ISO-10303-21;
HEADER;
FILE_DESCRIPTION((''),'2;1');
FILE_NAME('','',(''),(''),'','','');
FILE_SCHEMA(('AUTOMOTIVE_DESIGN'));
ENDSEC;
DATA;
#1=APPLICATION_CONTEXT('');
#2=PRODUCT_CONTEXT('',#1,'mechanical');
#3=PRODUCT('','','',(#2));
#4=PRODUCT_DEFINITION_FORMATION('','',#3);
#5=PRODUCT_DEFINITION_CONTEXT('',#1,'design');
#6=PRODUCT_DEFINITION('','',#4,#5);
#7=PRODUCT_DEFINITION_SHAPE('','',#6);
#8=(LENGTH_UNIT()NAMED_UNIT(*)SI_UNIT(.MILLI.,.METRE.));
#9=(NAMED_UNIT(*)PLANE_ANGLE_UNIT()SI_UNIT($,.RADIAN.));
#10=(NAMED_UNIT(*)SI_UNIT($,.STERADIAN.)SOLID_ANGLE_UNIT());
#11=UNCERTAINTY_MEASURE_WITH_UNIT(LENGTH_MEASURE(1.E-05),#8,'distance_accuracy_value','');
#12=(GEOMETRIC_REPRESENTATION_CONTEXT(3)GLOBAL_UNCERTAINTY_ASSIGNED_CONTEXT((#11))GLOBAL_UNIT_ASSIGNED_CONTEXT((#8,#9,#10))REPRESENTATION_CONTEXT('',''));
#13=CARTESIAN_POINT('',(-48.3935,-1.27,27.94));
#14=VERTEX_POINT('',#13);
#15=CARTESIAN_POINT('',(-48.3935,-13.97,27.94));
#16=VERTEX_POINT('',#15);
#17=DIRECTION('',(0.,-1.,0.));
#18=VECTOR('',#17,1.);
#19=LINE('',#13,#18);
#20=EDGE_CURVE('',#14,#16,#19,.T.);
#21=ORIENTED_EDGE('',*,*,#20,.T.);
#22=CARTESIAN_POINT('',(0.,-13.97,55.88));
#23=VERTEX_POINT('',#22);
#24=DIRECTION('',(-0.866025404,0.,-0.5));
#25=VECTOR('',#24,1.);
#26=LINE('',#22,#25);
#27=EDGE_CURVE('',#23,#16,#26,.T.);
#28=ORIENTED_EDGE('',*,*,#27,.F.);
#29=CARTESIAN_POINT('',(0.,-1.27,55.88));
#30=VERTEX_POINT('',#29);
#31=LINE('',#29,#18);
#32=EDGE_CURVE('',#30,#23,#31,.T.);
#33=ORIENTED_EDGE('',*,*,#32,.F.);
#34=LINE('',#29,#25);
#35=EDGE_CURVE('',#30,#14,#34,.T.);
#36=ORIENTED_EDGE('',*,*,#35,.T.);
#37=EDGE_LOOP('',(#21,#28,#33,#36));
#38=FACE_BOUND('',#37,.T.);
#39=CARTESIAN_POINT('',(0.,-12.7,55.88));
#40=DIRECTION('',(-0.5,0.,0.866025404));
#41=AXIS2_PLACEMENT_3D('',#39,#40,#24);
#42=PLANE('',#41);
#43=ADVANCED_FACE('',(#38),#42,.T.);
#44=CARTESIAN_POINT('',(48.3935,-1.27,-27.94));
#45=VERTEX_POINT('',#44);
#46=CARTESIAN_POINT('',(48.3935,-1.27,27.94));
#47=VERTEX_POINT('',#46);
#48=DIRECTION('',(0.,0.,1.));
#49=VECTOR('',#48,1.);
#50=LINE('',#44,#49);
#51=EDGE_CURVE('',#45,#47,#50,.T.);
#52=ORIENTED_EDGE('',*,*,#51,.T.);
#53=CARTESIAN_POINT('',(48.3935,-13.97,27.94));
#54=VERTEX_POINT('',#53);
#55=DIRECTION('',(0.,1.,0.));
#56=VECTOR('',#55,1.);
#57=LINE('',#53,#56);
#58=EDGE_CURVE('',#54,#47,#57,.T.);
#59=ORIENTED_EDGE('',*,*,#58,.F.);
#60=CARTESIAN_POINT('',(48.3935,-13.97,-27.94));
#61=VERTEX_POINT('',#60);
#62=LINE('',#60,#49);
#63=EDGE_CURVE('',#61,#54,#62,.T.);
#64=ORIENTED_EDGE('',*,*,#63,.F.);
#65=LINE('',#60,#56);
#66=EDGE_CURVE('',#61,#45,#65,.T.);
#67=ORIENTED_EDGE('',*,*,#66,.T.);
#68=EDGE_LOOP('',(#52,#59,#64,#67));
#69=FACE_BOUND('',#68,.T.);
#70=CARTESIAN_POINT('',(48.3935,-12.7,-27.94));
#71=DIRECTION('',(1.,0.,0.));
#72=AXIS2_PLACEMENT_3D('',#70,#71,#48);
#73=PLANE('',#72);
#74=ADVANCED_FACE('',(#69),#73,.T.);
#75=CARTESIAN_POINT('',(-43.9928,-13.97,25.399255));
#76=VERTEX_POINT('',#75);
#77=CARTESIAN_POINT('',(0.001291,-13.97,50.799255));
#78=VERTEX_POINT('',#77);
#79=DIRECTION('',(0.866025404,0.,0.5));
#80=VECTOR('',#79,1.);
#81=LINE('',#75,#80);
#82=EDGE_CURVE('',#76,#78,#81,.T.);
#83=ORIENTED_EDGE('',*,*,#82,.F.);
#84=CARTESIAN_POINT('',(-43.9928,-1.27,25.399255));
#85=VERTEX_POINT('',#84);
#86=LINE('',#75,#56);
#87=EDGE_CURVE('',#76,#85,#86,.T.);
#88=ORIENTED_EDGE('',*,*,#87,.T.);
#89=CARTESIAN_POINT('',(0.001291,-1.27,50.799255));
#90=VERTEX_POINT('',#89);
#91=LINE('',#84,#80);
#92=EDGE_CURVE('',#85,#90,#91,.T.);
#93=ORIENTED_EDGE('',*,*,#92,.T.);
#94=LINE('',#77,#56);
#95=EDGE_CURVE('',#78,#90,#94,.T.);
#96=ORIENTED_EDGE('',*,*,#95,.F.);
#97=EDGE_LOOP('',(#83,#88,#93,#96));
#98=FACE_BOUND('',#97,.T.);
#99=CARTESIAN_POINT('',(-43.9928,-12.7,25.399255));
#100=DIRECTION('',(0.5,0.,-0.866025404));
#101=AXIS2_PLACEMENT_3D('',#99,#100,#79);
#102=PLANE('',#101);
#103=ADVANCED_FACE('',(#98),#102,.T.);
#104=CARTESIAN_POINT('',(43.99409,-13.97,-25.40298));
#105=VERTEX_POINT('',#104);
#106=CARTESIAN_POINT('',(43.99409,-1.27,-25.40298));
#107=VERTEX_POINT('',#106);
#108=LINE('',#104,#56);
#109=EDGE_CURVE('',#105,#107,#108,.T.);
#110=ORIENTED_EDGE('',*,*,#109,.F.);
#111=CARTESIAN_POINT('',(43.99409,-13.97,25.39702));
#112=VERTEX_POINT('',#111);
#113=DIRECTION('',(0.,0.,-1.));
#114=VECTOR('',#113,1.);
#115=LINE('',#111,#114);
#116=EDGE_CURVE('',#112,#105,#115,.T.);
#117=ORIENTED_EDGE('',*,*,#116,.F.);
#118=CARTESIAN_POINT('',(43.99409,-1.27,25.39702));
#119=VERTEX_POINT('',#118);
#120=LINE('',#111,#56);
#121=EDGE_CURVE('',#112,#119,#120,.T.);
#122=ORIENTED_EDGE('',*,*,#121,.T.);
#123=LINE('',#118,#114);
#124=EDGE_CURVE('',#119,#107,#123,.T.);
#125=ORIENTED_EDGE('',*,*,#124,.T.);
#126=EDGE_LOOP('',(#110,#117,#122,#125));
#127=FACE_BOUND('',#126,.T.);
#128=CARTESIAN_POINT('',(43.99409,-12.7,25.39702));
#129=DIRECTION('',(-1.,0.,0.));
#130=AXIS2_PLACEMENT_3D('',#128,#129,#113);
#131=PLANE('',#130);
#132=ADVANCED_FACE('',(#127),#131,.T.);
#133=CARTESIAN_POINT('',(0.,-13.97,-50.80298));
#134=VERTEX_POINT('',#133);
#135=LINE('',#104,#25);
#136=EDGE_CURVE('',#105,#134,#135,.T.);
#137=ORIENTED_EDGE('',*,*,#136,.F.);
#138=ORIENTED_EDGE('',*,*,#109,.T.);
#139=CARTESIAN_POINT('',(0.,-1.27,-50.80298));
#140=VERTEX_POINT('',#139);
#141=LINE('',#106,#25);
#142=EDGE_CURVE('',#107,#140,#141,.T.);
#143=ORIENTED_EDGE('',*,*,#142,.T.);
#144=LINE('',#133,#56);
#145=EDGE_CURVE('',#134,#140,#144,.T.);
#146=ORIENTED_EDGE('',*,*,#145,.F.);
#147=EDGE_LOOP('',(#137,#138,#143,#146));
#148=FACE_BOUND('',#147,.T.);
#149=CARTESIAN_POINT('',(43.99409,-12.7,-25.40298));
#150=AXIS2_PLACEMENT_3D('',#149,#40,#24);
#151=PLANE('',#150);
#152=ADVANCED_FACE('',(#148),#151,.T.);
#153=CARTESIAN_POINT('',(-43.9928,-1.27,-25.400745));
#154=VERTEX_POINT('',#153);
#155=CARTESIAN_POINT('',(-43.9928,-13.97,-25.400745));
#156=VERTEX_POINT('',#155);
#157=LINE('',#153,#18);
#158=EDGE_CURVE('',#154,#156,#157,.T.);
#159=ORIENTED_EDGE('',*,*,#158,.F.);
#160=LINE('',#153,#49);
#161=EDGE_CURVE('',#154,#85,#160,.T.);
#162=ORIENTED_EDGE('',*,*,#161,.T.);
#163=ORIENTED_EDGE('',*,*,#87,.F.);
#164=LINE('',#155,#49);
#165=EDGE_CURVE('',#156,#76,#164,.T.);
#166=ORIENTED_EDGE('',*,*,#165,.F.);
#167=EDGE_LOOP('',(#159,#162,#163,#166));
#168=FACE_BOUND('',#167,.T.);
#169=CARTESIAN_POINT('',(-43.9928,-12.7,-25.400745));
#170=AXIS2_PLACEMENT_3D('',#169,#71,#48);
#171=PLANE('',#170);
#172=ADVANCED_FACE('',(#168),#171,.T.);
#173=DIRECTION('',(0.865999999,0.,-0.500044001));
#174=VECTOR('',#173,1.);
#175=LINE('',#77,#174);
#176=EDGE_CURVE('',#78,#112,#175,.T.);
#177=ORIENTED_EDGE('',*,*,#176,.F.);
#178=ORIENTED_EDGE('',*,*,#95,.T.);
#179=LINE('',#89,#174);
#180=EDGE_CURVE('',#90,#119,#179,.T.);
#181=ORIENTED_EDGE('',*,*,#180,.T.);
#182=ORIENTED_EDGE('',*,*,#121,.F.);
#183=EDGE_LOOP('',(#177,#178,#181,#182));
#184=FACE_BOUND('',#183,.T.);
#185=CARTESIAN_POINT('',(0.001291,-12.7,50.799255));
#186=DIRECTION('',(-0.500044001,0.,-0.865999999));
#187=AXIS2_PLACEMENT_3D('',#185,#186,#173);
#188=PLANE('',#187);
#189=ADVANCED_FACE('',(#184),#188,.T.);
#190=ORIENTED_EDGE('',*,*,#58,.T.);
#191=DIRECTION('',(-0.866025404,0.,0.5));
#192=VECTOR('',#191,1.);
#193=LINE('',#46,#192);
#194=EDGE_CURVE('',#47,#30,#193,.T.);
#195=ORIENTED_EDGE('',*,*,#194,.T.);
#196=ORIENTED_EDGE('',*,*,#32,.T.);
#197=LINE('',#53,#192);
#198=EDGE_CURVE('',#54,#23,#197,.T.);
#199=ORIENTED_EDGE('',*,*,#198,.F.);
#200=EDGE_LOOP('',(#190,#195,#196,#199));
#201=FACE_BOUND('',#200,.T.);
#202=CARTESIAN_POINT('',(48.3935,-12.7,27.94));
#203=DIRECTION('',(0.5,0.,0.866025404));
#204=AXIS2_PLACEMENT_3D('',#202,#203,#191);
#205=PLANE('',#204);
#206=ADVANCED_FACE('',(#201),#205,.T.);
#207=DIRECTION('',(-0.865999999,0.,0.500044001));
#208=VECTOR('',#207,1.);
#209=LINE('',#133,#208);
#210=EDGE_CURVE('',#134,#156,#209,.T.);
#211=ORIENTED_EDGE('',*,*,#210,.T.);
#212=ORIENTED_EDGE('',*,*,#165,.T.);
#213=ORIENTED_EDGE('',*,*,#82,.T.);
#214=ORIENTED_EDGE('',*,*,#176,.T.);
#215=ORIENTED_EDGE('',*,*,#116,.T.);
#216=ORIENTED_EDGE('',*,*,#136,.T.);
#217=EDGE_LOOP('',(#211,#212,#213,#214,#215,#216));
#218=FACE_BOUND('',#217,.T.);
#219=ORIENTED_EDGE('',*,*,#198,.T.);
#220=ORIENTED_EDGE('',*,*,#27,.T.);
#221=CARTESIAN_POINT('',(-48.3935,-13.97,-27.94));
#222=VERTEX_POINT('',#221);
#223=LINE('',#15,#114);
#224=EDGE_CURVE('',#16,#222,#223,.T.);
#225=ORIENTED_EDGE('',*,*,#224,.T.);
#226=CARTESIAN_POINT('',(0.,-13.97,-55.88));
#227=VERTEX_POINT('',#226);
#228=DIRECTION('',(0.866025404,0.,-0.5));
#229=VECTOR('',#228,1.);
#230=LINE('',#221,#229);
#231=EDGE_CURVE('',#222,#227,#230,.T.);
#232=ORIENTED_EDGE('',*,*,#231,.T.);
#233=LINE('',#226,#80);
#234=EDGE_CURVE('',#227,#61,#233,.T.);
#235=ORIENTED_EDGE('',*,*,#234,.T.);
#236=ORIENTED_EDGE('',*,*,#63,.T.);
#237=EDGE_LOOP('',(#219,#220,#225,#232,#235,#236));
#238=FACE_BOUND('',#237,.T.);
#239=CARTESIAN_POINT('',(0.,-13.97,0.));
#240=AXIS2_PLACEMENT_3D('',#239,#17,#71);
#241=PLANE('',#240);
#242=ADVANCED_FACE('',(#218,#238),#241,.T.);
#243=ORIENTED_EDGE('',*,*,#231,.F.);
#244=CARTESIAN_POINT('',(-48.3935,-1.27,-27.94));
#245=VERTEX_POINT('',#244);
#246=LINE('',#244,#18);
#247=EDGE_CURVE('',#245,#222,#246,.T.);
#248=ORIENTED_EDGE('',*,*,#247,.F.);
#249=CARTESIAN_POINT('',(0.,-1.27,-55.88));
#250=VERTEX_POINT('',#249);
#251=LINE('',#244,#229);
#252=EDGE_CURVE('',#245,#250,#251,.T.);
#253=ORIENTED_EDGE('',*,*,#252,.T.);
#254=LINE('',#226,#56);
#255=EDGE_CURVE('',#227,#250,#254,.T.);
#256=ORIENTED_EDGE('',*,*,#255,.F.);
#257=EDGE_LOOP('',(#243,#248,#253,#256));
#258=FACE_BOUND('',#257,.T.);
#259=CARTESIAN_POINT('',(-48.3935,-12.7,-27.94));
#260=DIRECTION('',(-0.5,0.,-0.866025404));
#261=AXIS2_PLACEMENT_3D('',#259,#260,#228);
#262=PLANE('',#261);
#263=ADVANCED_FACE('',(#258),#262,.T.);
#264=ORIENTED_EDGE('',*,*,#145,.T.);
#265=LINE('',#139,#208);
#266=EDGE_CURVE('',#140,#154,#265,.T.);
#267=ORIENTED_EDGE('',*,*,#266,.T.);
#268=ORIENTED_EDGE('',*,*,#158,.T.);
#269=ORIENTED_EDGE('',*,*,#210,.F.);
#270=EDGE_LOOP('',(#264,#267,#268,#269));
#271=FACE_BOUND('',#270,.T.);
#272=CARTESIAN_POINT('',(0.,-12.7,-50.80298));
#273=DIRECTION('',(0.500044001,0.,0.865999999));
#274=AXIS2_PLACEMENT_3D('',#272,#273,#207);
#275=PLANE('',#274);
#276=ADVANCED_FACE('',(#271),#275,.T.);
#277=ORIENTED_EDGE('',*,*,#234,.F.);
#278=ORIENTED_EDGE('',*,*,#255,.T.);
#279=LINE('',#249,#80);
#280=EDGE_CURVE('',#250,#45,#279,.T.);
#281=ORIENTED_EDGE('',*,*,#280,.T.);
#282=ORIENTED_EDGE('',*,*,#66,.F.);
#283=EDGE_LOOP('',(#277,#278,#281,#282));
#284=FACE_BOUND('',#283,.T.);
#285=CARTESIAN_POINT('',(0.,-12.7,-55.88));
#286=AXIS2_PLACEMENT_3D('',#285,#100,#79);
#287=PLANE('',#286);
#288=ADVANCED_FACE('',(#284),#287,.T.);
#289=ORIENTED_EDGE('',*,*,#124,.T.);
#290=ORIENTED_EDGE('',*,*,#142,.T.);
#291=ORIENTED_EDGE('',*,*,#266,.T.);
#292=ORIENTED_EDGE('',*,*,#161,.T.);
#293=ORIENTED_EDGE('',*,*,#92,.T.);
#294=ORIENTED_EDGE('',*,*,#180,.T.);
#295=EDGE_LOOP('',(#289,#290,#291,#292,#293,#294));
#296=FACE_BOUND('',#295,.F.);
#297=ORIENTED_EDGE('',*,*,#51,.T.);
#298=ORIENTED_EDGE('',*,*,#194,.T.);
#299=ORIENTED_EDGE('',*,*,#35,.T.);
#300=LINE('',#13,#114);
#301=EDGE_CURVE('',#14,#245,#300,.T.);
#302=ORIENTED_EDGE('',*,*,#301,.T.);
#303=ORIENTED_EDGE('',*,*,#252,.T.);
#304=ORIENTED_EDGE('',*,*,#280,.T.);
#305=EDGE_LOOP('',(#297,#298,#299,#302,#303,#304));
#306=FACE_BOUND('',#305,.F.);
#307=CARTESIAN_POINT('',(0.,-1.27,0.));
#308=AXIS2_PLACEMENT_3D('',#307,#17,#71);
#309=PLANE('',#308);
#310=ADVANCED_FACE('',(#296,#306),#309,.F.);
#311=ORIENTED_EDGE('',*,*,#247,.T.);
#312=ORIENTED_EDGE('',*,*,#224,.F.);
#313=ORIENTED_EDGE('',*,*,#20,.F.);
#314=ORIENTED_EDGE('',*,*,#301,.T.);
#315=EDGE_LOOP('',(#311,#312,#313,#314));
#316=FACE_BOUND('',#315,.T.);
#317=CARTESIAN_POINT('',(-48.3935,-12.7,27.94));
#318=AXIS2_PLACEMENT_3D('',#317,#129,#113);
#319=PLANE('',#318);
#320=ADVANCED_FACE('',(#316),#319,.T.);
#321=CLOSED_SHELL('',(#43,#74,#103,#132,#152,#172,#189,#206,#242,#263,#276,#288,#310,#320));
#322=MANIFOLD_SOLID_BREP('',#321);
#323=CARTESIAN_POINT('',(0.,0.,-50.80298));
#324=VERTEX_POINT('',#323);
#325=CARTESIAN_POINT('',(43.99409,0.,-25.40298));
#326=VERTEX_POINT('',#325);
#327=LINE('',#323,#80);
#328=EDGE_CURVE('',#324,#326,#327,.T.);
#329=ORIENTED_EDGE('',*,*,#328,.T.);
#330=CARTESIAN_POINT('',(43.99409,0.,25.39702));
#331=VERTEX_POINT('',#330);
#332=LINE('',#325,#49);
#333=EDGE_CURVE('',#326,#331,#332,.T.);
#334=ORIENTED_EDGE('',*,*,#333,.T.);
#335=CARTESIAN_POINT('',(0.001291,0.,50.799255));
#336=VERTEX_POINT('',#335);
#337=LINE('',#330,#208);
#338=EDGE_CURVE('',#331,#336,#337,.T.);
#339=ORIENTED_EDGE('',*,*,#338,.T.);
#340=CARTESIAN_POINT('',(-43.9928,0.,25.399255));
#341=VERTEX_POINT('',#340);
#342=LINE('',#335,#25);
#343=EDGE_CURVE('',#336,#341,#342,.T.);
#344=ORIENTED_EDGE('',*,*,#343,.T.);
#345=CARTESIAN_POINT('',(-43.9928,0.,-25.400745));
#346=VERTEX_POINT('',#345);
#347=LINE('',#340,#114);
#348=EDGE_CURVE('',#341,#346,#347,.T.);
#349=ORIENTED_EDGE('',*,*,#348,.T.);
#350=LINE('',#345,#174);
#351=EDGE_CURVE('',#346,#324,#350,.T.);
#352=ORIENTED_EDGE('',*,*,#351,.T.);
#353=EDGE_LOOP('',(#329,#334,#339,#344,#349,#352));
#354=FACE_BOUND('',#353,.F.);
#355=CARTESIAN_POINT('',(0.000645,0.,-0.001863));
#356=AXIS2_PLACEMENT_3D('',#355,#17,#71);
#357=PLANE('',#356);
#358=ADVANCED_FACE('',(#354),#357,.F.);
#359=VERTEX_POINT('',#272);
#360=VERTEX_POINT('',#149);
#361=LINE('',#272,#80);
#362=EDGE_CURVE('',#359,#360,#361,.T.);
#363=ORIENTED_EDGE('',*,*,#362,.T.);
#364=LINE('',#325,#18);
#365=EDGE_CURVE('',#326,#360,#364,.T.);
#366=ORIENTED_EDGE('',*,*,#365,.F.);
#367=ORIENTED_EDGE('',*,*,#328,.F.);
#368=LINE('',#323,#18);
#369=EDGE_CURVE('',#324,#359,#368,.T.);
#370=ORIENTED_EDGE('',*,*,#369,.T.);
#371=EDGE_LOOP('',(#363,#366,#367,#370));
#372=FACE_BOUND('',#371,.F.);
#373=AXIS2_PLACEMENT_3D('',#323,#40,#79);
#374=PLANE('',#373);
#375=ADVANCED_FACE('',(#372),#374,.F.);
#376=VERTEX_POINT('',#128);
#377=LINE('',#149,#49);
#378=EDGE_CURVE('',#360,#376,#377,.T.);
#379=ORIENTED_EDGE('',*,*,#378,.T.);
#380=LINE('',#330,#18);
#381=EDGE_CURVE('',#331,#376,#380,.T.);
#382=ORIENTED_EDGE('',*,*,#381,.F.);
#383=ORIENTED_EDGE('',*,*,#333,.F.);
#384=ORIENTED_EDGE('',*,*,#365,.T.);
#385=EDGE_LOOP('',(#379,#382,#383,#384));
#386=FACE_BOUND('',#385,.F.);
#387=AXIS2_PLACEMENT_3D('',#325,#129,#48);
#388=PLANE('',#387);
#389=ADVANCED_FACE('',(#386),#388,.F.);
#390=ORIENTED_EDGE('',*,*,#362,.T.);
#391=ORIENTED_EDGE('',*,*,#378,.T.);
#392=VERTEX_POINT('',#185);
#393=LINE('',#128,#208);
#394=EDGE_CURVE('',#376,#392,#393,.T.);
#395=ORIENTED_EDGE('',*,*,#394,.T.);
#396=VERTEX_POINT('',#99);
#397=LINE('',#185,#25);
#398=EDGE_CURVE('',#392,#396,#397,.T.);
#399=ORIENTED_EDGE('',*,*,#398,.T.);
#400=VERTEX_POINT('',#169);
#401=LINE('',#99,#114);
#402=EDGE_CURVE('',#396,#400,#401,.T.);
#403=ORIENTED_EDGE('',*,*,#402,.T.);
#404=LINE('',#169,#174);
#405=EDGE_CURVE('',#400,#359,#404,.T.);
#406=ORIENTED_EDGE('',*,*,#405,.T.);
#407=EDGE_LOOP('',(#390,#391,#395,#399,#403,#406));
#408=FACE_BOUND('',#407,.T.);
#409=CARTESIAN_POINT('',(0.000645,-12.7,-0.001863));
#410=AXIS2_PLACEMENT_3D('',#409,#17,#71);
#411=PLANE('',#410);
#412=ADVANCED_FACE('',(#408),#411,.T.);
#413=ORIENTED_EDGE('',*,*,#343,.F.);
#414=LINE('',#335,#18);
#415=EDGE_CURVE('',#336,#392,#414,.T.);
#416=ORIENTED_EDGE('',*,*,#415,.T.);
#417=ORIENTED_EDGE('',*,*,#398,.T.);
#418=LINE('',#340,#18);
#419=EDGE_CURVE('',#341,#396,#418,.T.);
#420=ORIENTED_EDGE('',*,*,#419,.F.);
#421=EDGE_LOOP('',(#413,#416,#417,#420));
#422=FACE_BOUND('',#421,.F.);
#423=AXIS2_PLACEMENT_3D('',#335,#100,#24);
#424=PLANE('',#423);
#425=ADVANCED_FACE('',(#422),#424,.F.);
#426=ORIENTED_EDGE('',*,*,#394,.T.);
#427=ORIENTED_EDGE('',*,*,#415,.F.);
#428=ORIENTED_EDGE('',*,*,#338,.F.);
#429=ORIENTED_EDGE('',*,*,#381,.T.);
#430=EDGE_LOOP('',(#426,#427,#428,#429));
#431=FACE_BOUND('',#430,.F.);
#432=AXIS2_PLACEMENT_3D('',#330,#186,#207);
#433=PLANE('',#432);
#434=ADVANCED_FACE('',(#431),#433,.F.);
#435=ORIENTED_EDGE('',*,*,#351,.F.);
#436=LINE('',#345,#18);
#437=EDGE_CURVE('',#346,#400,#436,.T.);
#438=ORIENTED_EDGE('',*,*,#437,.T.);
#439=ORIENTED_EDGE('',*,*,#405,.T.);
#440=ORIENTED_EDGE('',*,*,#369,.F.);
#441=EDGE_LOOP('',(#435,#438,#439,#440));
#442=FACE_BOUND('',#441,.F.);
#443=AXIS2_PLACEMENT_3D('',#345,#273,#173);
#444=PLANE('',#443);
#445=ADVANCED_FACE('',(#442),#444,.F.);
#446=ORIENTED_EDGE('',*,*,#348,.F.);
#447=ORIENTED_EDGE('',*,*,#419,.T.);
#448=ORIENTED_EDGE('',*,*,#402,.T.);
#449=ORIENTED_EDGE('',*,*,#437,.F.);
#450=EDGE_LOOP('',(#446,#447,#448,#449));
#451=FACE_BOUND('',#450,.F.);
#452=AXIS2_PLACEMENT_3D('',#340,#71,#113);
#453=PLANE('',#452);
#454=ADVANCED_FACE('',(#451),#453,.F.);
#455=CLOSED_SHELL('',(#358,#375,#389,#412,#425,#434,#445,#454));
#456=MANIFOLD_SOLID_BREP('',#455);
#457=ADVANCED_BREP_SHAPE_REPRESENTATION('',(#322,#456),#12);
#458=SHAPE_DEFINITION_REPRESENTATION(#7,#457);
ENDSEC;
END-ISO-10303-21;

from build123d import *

# Parameters (mm, degrees)
F1_DEPTH = 12.7
F3_DEPTH = 1.27
F4_DEPTH = 11.43


with BuildPart() as f1:
    # F0 (on Front) → F1 (new body)
    with BuildSketch(Plane.XZ):
        Polygon((0.0012905122, 50.7992549224), (-43.9928, 25.3992549224), (-43.9928, -25.4007450776), (-7.57e-08, -50.8029803104), (43.9940904365, -25.4029803104), (43.9940904365, 25.3970196896), align=None)
    extrude(amount=F1_DEPTH)


with BuildPart() as f3:
    # F2 (on face) → F3 (new body)
    with BuildSketch(Plane.XZ.offset(12.7)):
        Polygon((48.3934995635, 27.94), (0, 55.88), (-48.3934995635, 27.94), (-48.3934995635, -27.94), (0, -55.88), (48.3934995635, -27.94), align=None)
        Polygon((-43.9928, -25.4007450776), (-43.9928, 25.3992549224), (0.0012905122, 50.7992549224), (43.9940904365, 25.3970196896), (43.9940904365, -25.4029803104), (-7.57e-08, -50.8029803104), align=None, mode=Mode.SUBTRACT)
    extrude(amount=F3_DEPTH)

    # F4 (add): a face of the model
    f4_faces = [f3.faces().sort_by_distance(p)[0] for p in [
        (46.9150537309, -12.7, 0),
    ]]
    extrude(f4_faces, amount=F4_DEPTH)


solid = Compound([f1.part, f3.part])
